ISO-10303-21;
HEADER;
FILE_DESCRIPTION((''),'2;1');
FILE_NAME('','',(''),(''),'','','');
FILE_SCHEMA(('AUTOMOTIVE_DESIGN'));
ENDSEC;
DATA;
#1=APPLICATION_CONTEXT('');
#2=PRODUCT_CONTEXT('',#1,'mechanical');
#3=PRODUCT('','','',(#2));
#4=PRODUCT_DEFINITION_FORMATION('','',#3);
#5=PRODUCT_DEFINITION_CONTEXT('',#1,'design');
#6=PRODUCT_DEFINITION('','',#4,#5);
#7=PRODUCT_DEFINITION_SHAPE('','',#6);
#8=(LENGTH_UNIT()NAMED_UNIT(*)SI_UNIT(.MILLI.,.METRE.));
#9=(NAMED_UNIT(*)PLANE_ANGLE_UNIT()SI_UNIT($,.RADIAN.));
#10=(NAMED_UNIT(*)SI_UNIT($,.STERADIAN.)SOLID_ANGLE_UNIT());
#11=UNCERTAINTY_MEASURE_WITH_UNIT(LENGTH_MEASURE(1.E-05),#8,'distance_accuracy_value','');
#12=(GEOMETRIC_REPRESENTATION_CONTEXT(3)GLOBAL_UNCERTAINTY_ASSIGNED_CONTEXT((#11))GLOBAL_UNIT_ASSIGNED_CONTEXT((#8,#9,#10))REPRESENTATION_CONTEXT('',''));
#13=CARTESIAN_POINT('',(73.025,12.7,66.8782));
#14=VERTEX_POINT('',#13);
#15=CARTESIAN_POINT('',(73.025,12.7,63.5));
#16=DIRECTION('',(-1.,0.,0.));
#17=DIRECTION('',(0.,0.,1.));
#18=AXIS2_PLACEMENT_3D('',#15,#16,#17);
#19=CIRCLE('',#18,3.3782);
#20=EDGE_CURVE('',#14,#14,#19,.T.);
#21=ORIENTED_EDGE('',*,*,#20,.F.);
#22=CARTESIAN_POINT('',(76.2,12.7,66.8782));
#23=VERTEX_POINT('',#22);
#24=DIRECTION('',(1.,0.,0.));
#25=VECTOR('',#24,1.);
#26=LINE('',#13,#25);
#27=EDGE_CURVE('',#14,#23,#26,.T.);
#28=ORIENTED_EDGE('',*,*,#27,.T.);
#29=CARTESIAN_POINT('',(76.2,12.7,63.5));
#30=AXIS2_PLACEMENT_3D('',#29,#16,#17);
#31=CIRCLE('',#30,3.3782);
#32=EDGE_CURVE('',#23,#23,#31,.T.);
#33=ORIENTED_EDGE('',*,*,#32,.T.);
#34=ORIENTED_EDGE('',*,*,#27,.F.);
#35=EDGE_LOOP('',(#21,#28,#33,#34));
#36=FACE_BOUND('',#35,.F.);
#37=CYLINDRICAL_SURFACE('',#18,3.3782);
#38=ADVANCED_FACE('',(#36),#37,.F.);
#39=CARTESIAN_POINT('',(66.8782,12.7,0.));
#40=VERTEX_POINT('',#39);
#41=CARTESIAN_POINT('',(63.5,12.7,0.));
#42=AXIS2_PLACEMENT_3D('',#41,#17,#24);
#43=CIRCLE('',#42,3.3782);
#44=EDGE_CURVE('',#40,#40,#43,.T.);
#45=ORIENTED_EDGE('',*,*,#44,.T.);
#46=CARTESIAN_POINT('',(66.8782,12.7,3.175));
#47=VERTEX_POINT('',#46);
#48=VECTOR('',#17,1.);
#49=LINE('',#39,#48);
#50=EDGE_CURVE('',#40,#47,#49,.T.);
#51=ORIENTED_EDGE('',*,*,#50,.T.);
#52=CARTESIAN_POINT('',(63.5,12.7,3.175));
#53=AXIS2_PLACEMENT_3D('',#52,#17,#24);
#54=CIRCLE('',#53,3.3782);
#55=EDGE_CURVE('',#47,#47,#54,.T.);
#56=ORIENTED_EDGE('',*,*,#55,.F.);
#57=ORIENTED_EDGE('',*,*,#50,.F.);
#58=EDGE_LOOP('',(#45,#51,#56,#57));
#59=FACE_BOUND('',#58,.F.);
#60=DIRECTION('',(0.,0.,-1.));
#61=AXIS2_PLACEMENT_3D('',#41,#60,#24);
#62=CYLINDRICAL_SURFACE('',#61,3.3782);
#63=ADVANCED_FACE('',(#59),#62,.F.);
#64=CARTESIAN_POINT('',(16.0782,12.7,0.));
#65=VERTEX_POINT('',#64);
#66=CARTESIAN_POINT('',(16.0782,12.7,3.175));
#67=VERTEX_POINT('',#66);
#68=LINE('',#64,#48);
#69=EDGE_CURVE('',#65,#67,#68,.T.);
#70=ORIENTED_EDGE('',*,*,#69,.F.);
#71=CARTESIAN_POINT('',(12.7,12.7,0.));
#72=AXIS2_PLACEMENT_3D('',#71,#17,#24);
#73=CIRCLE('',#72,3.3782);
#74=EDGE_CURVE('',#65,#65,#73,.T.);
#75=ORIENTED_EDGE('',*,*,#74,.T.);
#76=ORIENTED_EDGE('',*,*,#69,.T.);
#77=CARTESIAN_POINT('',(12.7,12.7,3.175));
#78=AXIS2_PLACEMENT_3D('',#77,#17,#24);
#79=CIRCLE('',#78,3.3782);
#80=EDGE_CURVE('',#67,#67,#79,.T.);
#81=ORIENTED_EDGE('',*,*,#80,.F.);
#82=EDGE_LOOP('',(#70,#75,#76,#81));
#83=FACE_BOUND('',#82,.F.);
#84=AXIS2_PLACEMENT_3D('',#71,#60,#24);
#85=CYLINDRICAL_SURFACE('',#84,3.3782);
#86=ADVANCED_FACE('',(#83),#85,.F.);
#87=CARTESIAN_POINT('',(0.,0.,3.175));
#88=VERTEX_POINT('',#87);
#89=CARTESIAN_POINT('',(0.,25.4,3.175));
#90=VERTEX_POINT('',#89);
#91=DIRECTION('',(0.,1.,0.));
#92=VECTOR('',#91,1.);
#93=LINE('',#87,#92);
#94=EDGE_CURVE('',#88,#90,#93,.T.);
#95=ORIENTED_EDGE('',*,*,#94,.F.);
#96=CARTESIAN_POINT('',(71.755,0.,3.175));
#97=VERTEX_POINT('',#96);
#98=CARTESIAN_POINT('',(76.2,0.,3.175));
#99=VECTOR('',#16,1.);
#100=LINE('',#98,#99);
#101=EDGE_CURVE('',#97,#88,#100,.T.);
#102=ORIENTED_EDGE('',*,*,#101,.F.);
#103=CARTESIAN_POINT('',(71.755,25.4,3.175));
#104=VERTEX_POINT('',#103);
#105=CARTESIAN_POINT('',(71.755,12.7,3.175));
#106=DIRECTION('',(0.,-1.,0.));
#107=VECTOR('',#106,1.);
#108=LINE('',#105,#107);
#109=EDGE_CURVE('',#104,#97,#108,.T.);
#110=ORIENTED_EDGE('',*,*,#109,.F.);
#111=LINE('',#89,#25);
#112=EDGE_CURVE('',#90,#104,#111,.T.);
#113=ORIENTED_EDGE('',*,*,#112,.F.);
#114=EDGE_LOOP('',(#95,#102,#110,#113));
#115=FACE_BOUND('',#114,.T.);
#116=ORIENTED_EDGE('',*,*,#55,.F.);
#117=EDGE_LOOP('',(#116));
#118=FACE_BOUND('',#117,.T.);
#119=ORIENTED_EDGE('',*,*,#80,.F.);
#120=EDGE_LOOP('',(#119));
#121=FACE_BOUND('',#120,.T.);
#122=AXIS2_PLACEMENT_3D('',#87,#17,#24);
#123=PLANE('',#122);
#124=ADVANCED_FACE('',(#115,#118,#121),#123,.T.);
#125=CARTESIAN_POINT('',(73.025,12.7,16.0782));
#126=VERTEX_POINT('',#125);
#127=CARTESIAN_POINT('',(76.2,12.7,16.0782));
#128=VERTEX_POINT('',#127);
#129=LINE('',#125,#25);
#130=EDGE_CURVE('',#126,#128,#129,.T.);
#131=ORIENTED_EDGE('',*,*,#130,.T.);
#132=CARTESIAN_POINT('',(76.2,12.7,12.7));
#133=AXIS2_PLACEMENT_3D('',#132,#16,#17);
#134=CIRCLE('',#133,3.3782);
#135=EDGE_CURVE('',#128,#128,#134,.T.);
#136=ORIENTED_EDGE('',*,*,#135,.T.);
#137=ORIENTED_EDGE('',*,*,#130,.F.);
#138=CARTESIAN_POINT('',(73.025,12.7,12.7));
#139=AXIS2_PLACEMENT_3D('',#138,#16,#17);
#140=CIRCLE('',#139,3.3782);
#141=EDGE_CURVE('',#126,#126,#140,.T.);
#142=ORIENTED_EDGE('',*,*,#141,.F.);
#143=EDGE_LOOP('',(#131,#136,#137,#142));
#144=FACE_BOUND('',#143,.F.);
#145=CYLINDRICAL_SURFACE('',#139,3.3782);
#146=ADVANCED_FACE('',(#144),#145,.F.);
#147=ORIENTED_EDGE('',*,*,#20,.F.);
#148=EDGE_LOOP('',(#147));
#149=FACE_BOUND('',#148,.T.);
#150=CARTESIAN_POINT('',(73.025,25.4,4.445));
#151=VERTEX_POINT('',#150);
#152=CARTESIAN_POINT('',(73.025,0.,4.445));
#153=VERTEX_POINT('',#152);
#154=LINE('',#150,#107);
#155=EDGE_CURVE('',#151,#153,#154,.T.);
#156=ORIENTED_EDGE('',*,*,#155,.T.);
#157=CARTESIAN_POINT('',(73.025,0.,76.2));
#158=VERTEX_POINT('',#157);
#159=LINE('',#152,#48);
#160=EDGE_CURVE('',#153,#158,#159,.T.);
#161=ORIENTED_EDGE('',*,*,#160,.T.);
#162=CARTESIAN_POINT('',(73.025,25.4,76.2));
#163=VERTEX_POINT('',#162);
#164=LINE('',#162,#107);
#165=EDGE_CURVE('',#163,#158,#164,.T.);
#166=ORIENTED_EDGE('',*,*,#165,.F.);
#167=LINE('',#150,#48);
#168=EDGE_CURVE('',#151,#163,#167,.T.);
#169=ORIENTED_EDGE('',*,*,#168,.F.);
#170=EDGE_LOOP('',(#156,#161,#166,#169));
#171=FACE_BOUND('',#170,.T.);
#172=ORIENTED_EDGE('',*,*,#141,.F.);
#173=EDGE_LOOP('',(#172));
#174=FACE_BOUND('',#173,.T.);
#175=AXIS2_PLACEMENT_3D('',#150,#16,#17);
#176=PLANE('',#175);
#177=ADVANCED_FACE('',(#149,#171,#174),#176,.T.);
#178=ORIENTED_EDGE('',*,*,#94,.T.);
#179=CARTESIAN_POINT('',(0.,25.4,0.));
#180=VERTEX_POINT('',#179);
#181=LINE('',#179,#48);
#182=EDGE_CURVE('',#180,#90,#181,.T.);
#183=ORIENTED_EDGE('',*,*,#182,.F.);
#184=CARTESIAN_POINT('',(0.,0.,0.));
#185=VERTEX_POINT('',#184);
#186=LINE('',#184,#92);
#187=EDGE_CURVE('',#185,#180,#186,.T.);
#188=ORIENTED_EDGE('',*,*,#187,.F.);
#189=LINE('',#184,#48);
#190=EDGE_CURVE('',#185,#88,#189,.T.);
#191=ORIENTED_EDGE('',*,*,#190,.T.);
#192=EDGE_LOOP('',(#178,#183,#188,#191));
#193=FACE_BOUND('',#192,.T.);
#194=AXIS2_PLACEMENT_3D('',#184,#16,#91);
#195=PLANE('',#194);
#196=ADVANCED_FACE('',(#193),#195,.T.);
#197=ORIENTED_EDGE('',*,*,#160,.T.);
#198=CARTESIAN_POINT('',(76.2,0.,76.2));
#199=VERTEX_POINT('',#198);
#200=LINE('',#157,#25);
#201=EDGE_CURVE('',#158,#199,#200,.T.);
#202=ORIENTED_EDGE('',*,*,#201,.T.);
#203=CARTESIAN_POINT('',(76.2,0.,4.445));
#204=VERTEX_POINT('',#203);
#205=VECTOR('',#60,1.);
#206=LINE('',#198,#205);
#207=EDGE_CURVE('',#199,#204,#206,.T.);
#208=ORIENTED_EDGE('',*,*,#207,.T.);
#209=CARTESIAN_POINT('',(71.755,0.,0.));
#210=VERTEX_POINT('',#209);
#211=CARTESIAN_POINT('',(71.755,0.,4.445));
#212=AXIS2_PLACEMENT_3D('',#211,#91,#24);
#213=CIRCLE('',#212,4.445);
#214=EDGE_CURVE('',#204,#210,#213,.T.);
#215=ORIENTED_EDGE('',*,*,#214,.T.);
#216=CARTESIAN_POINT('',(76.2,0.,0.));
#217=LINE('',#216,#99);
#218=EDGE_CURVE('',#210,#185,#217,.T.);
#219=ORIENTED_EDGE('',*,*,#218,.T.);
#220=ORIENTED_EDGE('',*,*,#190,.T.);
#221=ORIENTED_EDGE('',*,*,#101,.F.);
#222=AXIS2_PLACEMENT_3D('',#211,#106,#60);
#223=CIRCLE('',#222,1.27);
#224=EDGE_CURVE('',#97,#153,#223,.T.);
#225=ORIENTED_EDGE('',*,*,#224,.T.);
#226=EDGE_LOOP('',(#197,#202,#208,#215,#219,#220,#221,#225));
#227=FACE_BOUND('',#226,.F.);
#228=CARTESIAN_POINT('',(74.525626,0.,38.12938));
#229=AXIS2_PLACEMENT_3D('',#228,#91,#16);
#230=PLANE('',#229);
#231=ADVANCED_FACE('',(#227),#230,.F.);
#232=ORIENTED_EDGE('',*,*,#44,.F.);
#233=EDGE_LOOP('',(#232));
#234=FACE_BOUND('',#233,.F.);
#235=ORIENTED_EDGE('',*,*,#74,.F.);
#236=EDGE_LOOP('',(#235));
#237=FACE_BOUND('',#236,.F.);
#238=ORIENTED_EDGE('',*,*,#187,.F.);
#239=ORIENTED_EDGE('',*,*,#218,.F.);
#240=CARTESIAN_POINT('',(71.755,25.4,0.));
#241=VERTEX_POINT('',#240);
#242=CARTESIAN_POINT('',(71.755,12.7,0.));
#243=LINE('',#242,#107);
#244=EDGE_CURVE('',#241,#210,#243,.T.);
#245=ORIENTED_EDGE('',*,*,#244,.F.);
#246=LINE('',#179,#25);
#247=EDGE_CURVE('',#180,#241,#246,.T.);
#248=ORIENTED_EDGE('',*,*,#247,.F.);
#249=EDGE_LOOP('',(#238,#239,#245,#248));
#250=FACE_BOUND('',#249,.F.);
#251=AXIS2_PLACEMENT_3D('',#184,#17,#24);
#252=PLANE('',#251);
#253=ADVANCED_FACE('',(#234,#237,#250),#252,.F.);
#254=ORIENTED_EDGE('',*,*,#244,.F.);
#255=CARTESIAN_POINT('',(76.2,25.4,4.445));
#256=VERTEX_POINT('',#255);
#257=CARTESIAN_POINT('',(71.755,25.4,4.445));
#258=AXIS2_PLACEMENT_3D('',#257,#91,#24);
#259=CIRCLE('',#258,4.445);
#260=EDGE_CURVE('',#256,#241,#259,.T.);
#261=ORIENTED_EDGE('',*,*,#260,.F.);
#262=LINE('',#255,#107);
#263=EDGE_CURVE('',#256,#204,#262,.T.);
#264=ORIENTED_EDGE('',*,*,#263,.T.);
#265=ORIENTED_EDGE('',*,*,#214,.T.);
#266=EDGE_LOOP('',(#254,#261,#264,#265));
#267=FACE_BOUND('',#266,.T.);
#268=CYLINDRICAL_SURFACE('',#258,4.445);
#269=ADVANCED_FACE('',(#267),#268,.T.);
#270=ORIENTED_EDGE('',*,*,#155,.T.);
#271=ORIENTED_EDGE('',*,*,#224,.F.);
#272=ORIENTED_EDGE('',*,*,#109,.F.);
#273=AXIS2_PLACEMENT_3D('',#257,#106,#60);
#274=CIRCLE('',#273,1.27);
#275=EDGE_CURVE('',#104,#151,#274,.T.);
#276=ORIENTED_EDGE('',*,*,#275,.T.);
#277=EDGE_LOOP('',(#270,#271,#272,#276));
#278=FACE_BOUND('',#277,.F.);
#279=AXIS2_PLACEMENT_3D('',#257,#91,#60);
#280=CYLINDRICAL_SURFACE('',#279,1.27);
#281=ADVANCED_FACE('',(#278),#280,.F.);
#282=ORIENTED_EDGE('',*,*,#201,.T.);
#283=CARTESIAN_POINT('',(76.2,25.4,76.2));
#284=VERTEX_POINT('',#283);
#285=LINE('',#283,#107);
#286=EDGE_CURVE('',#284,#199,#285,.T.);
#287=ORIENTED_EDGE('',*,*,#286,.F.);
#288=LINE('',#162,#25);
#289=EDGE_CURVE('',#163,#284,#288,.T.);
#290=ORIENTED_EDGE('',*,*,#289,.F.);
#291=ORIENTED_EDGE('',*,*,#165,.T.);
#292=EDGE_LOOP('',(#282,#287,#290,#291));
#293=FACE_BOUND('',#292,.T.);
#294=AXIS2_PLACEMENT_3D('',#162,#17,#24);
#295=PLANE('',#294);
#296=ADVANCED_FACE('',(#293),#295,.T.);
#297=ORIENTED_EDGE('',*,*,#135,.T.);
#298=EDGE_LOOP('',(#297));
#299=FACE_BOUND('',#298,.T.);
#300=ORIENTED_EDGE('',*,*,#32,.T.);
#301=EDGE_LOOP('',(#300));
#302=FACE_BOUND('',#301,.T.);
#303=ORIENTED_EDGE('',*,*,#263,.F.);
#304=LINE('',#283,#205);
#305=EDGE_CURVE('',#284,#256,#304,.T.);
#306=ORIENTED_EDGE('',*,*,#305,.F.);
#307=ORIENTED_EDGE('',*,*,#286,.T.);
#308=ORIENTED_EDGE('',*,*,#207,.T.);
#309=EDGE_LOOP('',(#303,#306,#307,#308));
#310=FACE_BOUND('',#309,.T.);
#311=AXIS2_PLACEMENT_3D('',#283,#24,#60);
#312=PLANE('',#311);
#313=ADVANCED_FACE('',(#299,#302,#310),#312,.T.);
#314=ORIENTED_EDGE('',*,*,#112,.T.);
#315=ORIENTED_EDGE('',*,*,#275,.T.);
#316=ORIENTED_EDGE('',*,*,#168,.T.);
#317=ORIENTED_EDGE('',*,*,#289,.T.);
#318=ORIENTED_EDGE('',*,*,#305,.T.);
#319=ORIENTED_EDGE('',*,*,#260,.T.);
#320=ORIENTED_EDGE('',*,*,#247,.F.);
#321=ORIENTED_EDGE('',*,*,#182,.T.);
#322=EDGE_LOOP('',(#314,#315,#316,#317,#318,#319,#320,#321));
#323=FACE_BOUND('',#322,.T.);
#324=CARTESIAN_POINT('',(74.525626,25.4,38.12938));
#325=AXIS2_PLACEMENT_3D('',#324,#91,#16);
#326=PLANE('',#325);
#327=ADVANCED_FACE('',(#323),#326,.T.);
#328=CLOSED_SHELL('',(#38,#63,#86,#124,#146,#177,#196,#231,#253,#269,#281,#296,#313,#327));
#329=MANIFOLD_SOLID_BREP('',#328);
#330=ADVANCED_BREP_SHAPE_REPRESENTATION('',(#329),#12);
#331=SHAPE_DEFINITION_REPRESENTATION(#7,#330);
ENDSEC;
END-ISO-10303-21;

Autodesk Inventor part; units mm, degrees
ref_plane "YZ Plane" through (0, 0, 0) normal (1, 0, 0) x (0, 1, 0)
ref_plane "XZ Plane" through (0, 0, 0) normal (0, 1, 0) x (-1, 0, 0)
ref_plane "XY Plane" through (0, 0, 0) normal (0, 0, 1) x (1, 0, 0)
sketch "Sketch1" plane through (0, 0, 0) normal (0, 0, 1) x (1, 0, 0)
  line L0 (0, 0) -> (147.699314, 0)
  line L1 (147.699314, -25.4) -> (0, -25.4)
  line L2 (0, 0) -> (73.8378, 0)
  line L3 (73.8378, 0) -> (73.8378, -3.175)
  line L4 (73.8378, -3.175) -> (72.2503, -3.175)
  line L5 (72.2503, -3.175) -> (72.2503, -9.525)
  line L6 (72.2503, -9.525) -> (75.4253, -9.525)
  line L7 (75.4253, -9.525) -> (75.4253, -3.175)
  line L8 (75.4253, -3.175) -> (73.8378, -3.175)
  line L9 (73.849657, -25.4) -> (73.849657, -22.225)
  line L10 (73.849657, -22.225) -> (72.2503, -22.225)
  line L11 (72.2503, -22.225) -> (72.2503, -15.875)
  line L12 (72.2503, -15.875) -> (75.4253, -15.875)
  line L13 (75.4253, -15.875) -> (75.4253, -22.225)
  line L14 (75.4253, -22.225) -> (73.849657, -22.225)
sketch "Sketch3" plane through (73.025, 0, 76.2) normal (-1, 0, 0) x (0, 0, 1)
  line L0 (0, 0) -> (-71.755, 0) projected
  line L1 (0, 0) -> (0, 25.4) projected
  circle A0 centre (-12.7, 12.7) radius 3.3782
  circle A1 centre (-63.5, 12.7) radius 3.3782
  point P0 (-76.2, 0)
  dimension "d19" = 6.7564
  dimension "d20" = 6.7564
  dimension "d22" = 12.7
  dimension "d23" = 12.7
  dimension "d24" = 12.7
  dimension "d27" = 50.8
sketch "Sketch1 outline for Plate1" plane through (0, 0, 0) normal (0, 0, 1) x (1, 0, 0)
  line L0 (0, 0) -> (0, 25.4)
  line L1 (76.2, 0) -> (0, 0)
  line L2 (0, 25.4) -> (76.2, 25.4)
  line L3 (76.2, 25.4) -> (76.2, 0)
  circle A0 centre (12.7, 12.7) radius 3.3782
  circle A1 centre (63.5, 12.7) radius 3.3782
extrude "Plate1" add sketch "Sketch1 outline for Plate1" along normal blind 3.175
sketch "Sketch2" plane through (73.025, 25.4, 0) normal (1, 0, 0) x (0, 1, 0)
  line L0 (-25.4, 0) -> (0, 0)
  line L1 (0, 0) -> (0, 76.2)
  line L2 (0, 76.2) -> (-25.4, 76.2)
  line L3 (-25.4, 76.2) -> (-25.4, 0)
edge flange "Flange1" height 76.2 angle 90 thickness 3.175 bend radius 1.27 thickness toward (1, 0, 0) relief tear relief width 3.175 relief depth 1.5875 edges at (76.2, 12.7, 3.175) wall of the first edge with corners at (73.025, 0, 0) (73.025, 25.4, 0) (73.025, 25.4, 76.2) (73.025, 0, 76.2)
bend "Bend1"
corner "Corner1"
extrude "Cut1" cut sketch "Sketch3" against normal blind 3.175
equation "\"d9\" = BendReliefWidth"
equation "\"d10\" = BendReliefDepth"
equation "\"d11\" = MinimumRemnant"
equation "\"d12\" = BendRadius"
equation "\"d16\" = CornerReliefSize"
equation "\"d17\" = GapSize"
equation "\"d18\" = JacobiRadiusSize"
equation "\"BendRadius\" = Thickness"
equation "\"BendReliefWidth\" = Thickness"
equation "\"BendReliefDepth\" = 0.5 * Thickness"
equation "\"CornerReliefSize\" = 4 * Thickness"
equation "\"MinimumRemnant\" = 2 * Thickness"
equation "\"TransitionRadius\" = BendRadius"
equation "\"JacobiRadiusSize\" = BendRadius"
equation "\"GapSize\" = Thickness"
equation "\"d8\" = BendRadius"
equation "\"d7\" = Thickness"
equation "\"Thickness\" = 3.175"
properties part number "Gusset"
